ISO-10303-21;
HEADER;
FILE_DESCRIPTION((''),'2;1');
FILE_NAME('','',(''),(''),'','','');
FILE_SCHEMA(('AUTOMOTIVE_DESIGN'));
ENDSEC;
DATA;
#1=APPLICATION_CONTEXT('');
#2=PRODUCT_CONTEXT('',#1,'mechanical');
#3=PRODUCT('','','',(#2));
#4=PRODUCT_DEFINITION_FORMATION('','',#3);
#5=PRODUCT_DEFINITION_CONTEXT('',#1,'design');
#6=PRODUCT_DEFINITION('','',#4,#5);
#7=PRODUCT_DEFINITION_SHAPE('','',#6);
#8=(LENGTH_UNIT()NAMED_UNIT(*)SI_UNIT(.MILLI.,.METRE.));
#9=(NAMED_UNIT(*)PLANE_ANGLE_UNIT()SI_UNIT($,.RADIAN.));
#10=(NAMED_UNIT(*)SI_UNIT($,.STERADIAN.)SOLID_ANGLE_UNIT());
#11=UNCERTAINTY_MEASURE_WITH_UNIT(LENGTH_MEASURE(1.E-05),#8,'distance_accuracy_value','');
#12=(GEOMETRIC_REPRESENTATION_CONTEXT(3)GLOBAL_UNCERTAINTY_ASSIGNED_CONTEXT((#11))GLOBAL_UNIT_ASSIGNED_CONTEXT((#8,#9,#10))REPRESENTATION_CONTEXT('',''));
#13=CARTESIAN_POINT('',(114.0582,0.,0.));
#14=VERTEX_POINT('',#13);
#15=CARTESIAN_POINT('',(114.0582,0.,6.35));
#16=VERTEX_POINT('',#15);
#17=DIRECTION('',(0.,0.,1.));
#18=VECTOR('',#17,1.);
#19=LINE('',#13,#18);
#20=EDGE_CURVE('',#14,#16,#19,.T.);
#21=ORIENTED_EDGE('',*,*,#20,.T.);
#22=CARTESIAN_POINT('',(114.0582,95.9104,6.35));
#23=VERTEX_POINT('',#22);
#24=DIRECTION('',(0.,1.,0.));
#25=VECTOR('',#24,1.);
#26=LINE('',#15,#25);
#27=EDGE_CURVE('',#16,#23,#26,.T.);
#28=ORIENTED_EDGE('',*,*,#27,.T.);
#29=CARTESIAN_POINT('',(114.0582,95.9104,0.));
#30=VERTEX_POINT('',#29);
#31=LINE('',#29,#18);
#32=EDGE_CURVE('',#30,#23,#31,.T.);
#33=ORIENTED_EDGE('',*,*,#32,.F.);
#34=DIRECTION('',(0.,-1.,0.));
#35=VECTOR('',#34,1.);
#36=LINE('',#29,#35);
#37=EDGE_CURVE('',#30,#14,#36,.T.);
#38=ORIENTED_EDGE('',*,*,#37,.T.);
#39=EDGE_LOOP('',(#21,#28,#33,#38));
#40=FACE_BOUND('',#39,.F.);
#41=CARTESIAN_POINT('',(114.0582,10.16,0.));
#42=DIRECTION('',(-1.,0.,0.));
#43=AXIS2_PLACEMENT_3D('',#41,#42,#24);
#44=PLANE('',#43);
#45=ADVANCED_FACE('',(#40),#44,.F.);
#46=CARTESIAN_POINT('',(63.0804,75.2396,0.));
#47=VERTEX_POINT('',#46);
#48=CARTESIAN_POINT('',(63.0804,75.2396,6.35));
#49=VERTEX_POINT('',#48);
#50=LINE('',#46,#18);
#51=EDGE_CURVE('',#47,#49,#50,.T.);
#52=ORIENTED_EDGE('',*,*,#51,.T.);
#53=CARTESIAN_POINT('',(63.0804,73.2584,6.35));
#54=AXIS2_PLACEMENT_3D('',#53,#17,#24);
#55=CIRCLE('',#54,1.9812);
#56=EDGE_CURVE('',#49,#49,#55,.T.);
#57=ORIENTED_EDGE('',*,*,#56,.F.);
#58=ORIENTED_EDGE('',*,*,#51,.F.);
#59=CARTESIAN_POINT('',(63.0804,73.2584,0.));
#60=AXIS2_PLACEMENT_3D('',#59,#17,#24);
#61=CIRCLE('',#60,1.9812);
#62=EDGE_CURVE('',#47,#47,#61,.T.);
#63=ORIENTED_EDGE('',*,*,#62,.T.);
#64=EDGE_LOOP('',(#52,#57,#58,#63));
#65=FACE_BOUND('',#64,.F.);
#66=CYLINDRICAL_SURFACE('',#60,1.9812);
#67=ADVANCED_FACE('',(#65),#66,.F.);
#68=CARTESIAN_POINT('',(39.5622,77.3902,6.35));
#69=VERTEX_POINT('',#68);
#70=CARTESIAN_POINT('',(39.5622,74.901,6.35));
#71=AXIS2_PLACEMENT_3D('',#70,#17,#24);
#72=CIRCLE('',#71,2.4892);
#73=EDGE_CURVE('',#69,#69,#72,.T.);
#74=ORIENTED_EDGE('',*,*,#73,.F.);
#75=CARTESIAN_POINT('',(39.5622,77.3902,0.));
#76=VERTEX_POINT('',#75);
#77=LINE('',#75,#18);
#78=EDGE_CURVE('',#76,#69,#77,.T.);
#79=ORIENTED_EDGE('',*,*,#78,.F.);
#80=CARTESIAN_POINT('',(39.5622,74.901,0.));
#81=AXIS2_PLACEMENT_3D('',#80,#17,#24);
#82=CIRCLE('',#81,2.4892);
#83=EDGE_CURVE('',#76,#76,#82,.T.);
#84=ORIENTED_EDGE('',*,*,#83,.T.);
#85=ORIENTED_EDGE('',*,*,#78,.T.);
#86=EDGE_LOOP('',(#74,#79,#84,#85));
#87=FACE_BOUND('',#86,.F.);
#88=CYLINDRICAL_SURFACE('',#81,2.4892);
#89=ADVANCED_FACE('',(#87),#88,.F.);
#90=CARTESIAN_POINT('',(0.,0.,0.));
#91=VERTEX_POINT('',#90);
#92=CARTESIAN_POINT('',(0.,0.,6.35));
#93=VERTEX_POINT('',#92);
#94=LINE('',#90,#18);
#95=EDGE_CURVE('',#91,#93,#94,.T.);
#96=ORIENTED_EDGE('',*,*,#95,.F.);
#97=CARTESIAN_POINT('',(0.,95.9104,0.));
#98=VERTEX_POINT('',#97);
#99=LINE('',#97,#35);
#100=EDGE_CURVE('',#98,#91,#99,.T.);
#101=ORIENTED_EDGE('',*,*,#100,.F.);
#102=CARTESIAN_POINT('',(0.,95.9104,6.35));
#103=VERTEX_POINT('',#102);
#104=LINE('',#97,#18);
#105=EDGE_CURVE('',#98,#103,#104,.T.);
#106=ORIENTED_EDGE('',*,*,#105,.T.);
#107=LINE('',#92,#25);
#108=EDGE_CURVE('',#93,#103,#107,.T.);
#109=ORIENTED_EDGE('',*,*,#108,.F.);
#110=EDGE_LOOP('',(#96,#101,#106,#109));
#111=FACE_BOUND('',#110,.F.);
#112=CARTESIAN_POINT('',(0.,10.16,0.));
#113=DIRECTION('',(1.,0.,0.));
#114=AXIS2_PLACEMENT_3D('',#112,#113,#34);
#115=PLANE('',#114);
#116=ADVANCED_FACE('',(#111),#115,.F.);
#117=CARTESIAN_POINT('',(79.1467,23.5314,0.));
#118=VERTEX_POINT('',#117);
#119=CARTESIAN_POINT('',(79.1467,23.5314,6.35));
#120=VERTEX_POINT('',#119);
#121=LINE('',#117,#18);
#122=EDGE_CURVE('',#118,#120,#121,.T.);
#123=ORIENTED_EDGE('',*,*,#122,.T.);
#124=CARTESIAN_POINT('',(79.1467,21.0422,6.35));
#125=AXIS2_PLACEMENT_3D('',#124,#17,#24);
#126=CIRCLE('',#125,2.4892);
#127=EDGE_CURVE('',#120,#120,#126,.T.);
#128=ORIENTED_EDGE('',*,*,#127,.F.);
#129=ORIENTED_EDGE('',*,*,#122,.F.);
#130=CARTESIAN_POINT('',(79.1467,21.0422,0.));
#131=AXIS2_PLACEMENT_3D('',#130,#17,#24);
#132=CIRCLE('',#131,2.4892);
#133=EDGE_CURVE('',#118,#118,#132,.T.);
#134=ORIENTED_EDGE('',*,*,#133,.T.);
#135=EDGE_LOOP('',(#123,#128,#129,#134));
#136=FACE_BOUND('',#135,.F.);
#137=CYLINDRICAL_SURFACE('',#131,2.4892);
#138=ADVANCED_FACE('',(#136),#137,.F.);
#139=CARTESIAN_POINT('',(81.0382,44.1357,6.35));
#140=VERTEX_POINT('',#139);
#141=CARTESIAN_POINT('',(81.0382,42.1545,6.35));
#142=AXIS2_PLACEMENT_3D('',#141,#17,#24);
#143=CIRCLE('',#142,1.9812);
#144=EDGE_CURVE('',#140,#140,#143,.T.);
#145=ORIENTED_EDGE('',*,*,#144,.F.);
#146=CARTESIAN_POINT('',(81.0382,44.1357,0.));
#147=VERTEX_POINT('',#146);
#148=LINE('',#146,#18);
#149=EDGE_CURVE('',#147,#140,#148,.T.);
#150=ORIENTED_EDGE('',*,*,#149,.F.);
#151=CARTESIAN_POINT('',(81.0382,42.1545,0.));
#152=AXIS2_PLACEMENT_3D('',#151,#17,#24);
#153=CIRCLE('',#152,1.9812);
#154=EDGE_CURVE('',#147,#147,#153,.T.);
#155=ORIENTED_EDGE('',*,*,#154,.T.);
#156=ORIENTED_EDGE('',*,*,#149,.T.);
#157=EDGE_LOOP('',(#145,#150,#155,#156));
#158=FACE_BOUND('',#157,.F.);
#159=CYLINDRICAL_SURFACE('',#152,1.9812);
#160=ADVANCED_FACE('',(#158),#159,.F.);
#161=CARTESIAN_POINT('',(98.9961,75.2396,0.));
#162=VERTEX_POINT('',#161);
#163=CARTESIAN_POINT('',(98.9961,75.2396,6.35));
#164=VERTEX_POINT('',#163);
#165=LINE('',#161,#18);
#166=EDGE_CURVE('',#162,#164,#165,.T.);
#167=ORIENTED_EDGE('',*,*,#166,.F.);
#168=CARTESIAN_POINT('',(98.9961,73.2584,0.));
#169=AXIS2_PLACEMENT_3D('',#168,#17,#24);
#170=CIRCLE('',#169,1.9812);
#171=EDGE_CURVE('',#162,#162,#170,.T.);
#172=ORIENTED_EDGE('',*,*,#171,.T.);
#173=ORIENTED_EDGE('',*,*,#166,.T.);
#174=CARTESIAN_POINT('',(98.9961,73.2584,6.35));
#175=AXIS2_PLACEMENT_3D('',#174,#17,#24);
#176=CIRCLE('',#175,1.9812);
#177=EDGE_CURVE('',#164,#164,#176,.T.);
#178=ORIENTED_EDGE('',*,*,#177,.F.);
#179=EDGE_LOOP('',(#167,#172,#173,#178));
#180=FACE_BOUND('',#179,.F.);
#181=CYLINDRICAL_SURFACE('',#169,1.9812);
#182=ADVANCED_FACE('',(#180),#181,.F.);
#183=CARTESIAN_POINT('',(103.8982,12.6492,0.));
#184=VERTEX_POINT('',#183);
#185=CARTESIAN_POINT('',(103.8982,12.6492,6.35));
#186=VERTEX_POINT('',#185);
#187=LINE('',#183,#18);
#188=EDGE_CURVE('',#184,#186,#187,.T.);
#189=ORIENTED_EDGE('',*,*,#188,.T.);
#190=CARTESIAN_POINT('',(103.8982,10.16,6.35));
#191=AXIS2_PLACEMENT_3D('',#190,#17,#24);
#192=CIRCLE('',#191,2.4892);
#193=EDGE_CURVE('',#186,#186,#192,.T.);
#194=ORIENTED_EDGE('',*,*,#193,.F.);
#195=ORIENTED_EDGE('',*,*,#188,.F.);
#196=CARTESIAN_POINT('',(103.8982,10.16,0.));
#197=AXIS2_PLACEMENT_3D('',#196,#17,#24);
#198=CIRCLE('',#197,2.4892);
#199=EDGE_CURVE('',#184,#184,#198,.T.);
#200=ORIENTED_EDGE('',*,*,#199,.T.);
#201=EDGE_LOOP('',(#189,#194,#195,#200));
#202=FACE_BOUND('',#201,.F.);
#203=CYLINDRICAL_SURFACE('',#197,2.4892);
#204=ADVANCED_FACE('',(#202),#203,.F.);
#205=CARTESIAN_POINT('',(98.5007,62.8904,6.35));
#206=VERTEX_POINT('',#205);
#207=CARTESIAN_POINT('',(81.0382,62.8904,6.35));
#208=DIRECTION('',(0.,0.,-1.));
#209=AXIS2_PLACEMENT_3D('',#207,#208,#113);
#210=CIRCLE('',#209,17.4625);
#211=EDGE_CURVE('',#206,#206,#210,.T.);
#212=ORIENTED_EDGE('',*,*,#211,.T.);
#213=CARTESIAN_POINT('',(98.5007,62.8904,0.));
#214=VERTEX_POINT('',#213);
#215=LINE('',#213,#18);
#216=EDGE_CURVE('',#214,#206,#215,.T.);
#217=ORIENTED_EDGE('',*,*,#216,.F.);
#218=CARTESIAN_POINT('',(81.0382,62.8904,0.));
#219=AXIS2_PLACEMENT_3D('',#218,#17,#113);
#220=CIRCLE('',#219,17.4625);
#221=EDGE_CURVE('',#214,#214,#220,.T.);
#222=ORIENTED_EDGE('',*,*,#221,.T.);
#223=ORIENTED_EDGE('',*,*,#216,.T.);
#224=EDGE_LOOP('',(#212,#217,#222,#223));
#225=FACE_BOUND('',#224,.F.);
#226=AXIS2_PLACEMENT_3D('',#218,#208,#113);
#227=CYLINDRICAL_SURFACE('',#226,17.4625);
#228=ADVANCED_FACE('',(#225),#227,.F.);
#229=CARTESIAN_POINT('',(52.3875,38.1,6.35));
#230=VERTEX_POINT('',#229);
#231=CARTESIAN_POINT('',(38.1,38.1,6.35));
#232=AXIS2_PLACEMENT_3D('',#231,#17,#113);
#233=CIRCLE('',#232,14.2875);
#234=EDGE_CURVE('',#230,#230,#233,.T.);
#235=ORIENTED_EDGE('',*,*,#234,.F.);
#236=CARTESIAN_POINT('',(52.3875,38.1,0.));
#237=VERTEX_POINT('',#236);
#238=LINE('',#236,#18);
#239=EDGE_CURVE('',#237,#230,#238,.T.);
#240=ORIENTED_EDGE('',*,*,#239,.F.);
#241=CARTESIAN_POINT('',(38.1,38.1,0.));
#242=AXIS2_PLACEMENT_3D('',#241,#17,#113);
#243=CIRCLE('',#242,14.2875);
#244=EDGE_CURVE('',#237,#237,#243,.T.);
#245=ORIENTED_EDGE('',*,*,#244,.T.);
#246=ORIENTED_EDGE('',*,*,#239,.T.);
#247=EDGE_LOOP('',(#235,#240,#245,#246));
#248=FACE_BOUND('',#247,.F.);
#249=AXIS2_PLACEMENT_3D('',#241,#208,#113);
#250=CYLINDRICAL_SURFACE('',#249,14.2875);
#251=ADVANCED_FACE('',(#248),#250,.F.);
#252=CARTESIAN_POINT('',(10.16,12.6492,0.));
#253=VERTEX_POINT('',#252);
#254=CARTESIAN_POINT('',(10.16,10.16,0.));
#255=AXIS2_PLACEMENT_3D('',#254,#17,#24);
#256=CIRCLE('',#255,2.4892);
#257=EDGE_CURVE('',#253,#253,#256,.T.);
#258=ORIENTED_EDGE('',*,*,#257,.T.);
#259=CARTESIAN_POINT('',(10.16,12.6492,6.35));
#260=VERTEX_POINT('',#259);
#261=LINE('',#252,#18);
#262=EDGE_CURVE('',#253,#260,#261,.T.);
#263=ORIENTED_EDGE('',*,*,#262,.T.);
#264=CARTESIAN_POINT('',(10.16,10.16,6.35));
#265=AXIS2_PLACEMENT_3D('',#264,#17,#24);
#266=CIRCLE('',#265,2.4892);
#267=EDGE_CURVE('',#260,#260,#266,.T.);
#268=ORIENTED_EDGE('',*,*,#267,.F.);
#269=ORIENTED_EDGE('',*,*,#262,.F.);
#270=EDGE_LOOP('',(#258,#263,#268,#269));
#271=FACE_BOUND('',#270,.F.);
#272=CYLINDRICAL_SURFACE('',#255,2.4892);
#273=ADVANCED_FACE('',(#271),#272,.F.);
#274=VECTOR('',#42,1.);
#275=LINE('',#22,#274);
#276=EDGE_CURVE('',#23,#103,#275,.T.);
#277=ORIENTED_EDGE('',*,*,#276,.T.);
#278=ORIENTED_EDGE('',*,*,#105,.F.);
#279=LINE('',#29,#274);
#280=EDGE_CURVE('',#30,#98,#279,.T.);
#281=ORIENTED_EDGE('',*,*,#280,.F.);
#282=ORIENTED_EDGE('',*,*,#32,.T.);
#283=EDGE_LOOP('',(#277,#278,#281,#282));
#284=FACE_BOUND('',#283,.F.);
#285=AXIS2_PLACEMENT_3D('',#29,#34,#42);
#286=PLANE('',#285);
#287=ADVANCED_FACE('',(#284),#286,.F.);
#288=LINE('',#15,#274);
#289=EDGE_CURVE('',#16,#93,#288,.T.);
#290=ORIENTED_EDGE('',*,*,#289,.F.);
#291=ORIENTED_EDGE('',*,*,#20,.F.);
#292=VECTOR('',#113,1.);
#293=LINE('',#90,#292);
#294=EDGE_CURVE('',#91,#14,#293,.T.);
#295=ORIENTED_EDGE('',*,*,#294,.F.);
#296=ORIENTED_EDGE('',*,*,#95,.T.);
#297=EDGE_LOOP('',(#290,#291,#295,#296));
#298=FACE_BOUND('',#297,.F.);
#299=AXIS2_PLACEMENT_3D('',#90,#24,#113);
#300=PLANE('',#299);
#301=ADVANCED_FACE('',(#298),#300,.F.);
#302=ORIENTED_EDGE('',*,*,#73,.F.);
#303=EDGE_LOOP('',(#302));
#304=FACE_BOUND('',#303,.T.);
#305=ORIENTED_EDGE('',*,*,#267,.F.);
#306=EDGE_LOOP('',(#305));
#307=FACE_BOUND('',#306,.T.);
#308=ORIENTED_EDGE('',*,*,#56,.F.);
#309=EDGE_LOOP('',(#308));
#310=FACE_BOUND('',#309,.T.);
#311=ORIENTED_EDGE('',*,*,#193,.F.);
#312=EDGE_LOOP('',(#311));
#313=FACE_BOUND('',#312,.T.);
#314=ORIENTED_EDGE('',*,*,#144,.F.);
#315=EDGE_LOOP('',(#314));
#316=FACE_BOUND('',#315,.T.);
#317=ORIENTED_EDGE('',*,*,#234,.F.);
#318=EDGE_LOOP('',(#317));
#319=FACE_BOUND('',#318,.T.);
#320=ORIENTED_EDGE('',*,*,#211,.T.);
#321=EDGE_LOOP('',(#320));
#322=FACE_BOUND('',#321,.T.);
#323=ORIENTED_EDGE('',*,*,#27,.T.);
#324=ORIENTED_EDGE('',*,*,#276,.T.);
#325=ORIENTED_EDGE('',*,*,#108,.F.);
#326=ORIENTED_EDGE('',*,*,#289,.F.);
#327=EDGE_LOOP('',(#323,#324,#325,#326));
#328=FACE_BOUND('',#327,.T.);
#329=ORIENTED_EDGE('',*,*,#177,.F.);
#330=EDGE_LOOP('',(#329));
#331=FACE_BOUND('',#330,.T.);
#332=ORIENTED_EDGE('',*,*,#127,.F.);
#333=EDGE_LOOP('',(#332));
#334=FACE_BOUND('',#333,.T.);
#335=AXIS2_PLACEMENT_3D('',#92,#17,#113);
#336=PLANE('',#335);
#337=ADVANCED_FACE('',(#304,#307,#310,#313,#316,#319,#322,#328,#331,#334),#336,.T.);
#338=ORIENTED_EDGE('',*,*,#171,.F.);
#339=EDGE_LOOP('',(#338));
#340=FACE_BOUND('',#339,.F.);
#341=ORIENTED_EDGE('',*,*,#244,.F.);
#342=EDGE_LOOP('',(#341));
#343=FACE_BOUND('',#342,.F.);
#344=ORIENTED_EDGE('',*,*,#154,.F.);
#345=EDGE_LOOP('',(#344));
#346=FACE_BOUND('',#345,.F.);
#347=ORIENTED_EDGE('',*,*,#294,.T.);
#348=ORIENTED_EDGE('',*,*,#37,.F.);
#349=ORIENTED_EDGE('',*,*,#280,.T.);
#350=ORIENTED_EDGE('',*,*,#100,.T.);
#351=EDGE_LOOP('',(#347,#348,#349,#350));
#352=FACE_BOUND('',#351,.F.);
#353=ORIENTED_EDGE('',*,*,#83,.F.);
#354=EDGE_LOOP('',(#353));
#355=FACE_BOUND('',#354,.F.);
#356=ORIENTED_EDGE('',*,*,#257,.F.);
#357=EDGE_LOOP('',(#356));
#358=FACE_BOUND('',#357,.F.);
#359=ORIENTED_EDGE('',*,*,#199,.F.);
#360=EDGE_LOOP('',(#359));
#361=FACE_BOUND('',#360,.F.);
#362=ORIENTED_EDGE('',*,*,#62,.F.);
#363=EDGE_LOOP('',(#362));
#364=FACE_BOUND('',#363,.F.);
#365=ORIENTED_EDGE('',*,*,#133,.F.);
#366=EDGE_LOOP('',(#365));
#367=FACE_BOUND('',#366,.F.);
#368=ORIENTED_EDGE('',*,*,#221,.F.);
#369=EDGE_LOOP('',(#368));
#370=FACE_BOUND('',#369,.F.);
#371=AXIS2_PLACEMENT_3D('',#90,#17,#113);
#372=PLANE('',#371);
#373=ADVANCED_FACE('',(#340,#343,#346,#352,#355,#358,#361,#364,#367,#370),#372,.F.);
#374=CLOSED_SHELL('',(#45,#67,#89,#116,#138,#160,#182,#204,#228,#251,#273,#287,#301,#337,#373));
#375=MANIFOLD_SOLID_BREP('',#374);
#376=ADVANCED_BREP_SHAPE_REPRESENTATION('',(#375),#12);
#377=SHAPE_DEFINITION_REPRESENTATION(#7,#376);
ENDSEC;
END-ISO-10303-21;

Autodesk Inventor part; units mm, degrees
sketch "Sketch1" plane through (0, 0, 0) normal (0, 0, 1) x (1, 0, 0)
  line L0 (0, 0) -> (114.0582, 0)
  line L1 (114.0582, 0) -> (114.0582, 95.9104)
  line L2 (114.0582, 95.9104) -> (0, 95.9104)
  line L3 (0, 95.9104) -> (0, 0)
  line L4 (59.1, 17.1) -> (59.1, 59.1)
  line L5 (59.1, 59.1) -> (17.1, 59.1)
  line L6 (17.1, 59.1) -> (17.1, 17.1)
  line L7 (17.1, 17.1) -> (59.1, 17.1)
  line L8 (59.1, 17.1) -> (17.1, 59.1) construction
  line L9 (59.1, 59.1) -> (17.1, 17.1) construction
  circle A0 centre (38.1, 38.1) radius 38.1 construction
  circle A1 centre (38.1, 38.1) radius 20.2
  line L10 (45.4323, 38.1) -> (41.7662, 31.75)
  line L11 (41.7662, 31.75) -> (34.4338, 31.75)
  line L12 (34.4338, 31.75) -> (30.7677, 38.1)
  line L13 (30.7677, 38.1) -> (34.4338, 44.45)
  line L14 (34.4338, 44.45) -> (41.7662, 44.45)
  line L15 (41.7662, 44.45) -> (45.4323, 38.1)
  circle A2 centre (38.1, 38.1) radius 21.59 construction
  line L16 (38.1, 38.1) -> (81.0382, 62.8904) construction
  circle A3 centre (81.0382, 62.8904) radius 27.94 construction
  circle A4 centre (81.0382, 62.8904) radius 23.8125 construction
  circle A5 centre (81.0382, 62.8904) radius 17.4625
  circle A6 centre (38.1, 38.1) radius 14.2875
  line L17 (85.0105, 18.6054) -> (38.1, 38.1) construction
  circle A7 centre (81.0382, 62.8904) radius 33.02 construction
  circle A8 centre (38.1, 38.1) radius 25.4 construction
  circle A9 centre (38.1, 38.1) radius 9.525
  line L18 (81.0382, 62.8904) -> (81.0382, 42.1545)
  circle A10 centre (81.0382, 42.1545) radius 2.0828 construction
  circle A11 centre (39.5622, 74.901) radius 10.16
  circle A12 centre (39.5622, 74.901) radius 6.35
  circle A13 centre (81.0382, 42.1545) radius 6.35 construction
  circle A14 centre (38.1, 38.1) radius 26.67 construction
  line L19 (85.0105, 18.6054) -> (87.4474, 24.4692)
  line L20 (85.0105, 18.6054) -> (82.5737, 12.7416)
  line L21 (87.4474, 24.4692) -> (77.6267, 28.5504)
  line L22 (82.5737, 12.7416) -> (72.2567, 17.029)
  circle A15 centre (103.8982, 10.16) radius 10.16
  circle A16 centre (103.8982, 10.16) radius 6.35
  circle A17 centre (10.16, 10.16) radius 10.16
  circle A18 centre (38.1, 38.1) radius 32.258 construction
  circle A19 centre (10.16, 10.16) radius 6.35
  point P0 (20.1395, 56.0605)
  point P1 (56.0605, 20.1395)
  point P2 (81.0382, 44.2373)
  point P3 (81.0382, 45.4279)
  point P4 (98.9961, 73.2584)
  point P5 (63.0804, 73.2584)
  point P6 (81.0382, 48.5045)
  point P7 (79.1467, 21.0422)
  dimension "d10" = 34.925
  dimension "d17" = 4.1656
  dimension "d25" = 12.7
  dimension "d0" = 42
  dimension "d1" = 42
  dimension "d2" = 76.2
  dimension "d3" = 40.4
  dimension "d4" = 12.7
  dimension "d5" = 43.18
  dimension "d6" = 55.88
  dimension "d7" = 49.5808
  dimension "d8" = 47.625
  dimension "d11" = 28.575
  dimension "d13" = 30
  dimension "d14" = 5.08
  dimension "d15" = 50.8
  dimension "d16" = 19.05
  dimension "d18" = 1.1906
  dimension "d21" = 360
  dimension "d23" = 20.32
  dimension "d24" = 12.7
  dimension "d26" = 3.0766
  dimension "d30" = 5.08
  dimension "d33" = 50.8
  dimension "d34" = 6.35
  dimension "d35" = 6.35
  dimension "d36" = 20.32
  dimension "d37" = 64.516
  dimension "d38" = 12.7
ref_plane "Work Plane1" through (0, 0, -6.35) normal (0, 0, 1) x (1, 0, 0)
ref_plane "Work Plane2" through (0, 0, -41.875) normal (0, 0, 1) x (1, 0, 0)
ref_plane "Work Plane3" through (0, 0, -35.525) normal (0, 0, 1) x (1, 0, 0)
ref_plane "Work Plane4" through (0, 0, -92.675) normal (0, 0, 1) x (1, 0, 0)
ref_plane "Work Plane5" through (0, 0, -99.025) normal (0, 0, 1) x (1, 0, 0)
sketch "Sketch2" plane through (0, 0, -6.35) normal (0, 0, 1) x (1, 0, 0)
  line L0 (114.0582, 95.9104) -> (0, 95.9104) projected
  line L1 (0, 95.9104) -> (0, 0) projected
  line L2 (0, 0) -> (114.0582, 0) projected
  line L3 (114.0582, 0) -> (114.0582, 95.9104) projected
  circle A0 centre (81.0382, 62.8904) radius 17.4625 projected
  circle A1 centre (38.1, 38.1) radius 9.525 projected
  dimension "d14" = 5.08
sketch "Sketch3" plane through (0, 0, -41.875) normal (0, 0, 1) x (1, 0, 0)
  line L0 (114.0582, 95.9104) -> (0, 95.9104) projected
  line L1 (114.0582, 0) -> (114.0582, 95.9104) projected
  circle A0 centre (81.0382, 62.8904) radius 17.4625 projected
  line L2 (0, 0) -> (114.0582, 0) projected
  line L3 (0, 95.9104) -> (0, 0) projected
  circle A1 centre (38.1, 38.1) radius 14.2875 projected
  dimension "d14" = 5.08
sketch "Sketch4" plane through (0, 0, -35.525) normal (0, 0, 1) x (1, 0, 0)
  line L0 (114.0582, 95.9104) -> (0, 95.9104) projected
  line L1 (0, 95.9104) -> (0, 0) projected
  line L2 (0, 0) -> (114.0582, 0) projected
  line L3 (114.0582, 0) -> (114.0582, 95.9104) projected
  circle A0 centre (81.0382, 62.8904) radius 17.4625 projected
  circle A1 centre (38.1, 38.1) radius 14.2875 projected
  dimension "d14" = 5.08
sketch "Sketch5" plane through (0, 0, -92.675) normal (0, 0, 1) x (1, 0, 0)
  line L0 (0, 95.9104) -> (0, 0) projected
  line L1 (114.0582, 95.9104) -> (0, 95.9104) projected
  line L2 (0, 0) -> (114.0582, 0) projected
  line L3 (114.0582, 0) -> (114.0582, 95.9104) projected
  circle A0 centre (81.0382, 62.8904) radius 17.4625 projected
  dimension "d14" = 5.08
sketch "Sketch6" plane through (0, 0, -99.025) normal (0, 0, 1) x (1, 0, 0)
  line L0 (0, 95.9104) -> (0, 0) projected
  line L1 (0, 0) -> (114.0582, 0) projected
  line L2 (114.0582, 0) -> (114.0582, 95.9104) projected
  line L3 (114.0582, 95.9104) -> (0, 95.9104) projected
  circle A0 centre (81.0382, 62.8904) radius 17.4625 projected
  dimension "d14" = 5.08
extrude "Extrusion1" add sketch "Sketch1" along normal blind 6.35 contours L3 A17 L0 | A17 L7 L4 L5 L6 L3 L2 L1 A15 L0 | A17 L6 L7 | A15 L1 L0 | A15 | A17 L7 L6 | L6 L5 L4 L7 A17 | A1 | A11 | A12 | A16 | A19
hole "Hole1" at (81.0382, 42.1545, 0) at (98.9961, 73.2584, 0) at (63.0804, 73.2584, 0) direction (0, 0, 1) diameter 3.9624 end through all thread size "10-32 UNF" class "2B" standard "ANSI Unified Screw Threads"
hole "Hole2" at (79.1467, 21.0422, 0) direction (0, 0, 1) diameter 4.9784 end through all thread size "1/4-20 UNC" class "2B" standard "ANSI Unified Screw Threads"
hole "Hole3" at (39.5622, 74.901, 0) at (103.8982, 10.16, 0) at (10.16, 10.16, 0) direction (0, 0, 1) diameter 4.9784 end through all clearance for "Socket Head Cap Screw" size "#10" standard "Ansi Unified Screw Threads"
equation "\"d30\" = d14"
properties part number "Main Outline"
